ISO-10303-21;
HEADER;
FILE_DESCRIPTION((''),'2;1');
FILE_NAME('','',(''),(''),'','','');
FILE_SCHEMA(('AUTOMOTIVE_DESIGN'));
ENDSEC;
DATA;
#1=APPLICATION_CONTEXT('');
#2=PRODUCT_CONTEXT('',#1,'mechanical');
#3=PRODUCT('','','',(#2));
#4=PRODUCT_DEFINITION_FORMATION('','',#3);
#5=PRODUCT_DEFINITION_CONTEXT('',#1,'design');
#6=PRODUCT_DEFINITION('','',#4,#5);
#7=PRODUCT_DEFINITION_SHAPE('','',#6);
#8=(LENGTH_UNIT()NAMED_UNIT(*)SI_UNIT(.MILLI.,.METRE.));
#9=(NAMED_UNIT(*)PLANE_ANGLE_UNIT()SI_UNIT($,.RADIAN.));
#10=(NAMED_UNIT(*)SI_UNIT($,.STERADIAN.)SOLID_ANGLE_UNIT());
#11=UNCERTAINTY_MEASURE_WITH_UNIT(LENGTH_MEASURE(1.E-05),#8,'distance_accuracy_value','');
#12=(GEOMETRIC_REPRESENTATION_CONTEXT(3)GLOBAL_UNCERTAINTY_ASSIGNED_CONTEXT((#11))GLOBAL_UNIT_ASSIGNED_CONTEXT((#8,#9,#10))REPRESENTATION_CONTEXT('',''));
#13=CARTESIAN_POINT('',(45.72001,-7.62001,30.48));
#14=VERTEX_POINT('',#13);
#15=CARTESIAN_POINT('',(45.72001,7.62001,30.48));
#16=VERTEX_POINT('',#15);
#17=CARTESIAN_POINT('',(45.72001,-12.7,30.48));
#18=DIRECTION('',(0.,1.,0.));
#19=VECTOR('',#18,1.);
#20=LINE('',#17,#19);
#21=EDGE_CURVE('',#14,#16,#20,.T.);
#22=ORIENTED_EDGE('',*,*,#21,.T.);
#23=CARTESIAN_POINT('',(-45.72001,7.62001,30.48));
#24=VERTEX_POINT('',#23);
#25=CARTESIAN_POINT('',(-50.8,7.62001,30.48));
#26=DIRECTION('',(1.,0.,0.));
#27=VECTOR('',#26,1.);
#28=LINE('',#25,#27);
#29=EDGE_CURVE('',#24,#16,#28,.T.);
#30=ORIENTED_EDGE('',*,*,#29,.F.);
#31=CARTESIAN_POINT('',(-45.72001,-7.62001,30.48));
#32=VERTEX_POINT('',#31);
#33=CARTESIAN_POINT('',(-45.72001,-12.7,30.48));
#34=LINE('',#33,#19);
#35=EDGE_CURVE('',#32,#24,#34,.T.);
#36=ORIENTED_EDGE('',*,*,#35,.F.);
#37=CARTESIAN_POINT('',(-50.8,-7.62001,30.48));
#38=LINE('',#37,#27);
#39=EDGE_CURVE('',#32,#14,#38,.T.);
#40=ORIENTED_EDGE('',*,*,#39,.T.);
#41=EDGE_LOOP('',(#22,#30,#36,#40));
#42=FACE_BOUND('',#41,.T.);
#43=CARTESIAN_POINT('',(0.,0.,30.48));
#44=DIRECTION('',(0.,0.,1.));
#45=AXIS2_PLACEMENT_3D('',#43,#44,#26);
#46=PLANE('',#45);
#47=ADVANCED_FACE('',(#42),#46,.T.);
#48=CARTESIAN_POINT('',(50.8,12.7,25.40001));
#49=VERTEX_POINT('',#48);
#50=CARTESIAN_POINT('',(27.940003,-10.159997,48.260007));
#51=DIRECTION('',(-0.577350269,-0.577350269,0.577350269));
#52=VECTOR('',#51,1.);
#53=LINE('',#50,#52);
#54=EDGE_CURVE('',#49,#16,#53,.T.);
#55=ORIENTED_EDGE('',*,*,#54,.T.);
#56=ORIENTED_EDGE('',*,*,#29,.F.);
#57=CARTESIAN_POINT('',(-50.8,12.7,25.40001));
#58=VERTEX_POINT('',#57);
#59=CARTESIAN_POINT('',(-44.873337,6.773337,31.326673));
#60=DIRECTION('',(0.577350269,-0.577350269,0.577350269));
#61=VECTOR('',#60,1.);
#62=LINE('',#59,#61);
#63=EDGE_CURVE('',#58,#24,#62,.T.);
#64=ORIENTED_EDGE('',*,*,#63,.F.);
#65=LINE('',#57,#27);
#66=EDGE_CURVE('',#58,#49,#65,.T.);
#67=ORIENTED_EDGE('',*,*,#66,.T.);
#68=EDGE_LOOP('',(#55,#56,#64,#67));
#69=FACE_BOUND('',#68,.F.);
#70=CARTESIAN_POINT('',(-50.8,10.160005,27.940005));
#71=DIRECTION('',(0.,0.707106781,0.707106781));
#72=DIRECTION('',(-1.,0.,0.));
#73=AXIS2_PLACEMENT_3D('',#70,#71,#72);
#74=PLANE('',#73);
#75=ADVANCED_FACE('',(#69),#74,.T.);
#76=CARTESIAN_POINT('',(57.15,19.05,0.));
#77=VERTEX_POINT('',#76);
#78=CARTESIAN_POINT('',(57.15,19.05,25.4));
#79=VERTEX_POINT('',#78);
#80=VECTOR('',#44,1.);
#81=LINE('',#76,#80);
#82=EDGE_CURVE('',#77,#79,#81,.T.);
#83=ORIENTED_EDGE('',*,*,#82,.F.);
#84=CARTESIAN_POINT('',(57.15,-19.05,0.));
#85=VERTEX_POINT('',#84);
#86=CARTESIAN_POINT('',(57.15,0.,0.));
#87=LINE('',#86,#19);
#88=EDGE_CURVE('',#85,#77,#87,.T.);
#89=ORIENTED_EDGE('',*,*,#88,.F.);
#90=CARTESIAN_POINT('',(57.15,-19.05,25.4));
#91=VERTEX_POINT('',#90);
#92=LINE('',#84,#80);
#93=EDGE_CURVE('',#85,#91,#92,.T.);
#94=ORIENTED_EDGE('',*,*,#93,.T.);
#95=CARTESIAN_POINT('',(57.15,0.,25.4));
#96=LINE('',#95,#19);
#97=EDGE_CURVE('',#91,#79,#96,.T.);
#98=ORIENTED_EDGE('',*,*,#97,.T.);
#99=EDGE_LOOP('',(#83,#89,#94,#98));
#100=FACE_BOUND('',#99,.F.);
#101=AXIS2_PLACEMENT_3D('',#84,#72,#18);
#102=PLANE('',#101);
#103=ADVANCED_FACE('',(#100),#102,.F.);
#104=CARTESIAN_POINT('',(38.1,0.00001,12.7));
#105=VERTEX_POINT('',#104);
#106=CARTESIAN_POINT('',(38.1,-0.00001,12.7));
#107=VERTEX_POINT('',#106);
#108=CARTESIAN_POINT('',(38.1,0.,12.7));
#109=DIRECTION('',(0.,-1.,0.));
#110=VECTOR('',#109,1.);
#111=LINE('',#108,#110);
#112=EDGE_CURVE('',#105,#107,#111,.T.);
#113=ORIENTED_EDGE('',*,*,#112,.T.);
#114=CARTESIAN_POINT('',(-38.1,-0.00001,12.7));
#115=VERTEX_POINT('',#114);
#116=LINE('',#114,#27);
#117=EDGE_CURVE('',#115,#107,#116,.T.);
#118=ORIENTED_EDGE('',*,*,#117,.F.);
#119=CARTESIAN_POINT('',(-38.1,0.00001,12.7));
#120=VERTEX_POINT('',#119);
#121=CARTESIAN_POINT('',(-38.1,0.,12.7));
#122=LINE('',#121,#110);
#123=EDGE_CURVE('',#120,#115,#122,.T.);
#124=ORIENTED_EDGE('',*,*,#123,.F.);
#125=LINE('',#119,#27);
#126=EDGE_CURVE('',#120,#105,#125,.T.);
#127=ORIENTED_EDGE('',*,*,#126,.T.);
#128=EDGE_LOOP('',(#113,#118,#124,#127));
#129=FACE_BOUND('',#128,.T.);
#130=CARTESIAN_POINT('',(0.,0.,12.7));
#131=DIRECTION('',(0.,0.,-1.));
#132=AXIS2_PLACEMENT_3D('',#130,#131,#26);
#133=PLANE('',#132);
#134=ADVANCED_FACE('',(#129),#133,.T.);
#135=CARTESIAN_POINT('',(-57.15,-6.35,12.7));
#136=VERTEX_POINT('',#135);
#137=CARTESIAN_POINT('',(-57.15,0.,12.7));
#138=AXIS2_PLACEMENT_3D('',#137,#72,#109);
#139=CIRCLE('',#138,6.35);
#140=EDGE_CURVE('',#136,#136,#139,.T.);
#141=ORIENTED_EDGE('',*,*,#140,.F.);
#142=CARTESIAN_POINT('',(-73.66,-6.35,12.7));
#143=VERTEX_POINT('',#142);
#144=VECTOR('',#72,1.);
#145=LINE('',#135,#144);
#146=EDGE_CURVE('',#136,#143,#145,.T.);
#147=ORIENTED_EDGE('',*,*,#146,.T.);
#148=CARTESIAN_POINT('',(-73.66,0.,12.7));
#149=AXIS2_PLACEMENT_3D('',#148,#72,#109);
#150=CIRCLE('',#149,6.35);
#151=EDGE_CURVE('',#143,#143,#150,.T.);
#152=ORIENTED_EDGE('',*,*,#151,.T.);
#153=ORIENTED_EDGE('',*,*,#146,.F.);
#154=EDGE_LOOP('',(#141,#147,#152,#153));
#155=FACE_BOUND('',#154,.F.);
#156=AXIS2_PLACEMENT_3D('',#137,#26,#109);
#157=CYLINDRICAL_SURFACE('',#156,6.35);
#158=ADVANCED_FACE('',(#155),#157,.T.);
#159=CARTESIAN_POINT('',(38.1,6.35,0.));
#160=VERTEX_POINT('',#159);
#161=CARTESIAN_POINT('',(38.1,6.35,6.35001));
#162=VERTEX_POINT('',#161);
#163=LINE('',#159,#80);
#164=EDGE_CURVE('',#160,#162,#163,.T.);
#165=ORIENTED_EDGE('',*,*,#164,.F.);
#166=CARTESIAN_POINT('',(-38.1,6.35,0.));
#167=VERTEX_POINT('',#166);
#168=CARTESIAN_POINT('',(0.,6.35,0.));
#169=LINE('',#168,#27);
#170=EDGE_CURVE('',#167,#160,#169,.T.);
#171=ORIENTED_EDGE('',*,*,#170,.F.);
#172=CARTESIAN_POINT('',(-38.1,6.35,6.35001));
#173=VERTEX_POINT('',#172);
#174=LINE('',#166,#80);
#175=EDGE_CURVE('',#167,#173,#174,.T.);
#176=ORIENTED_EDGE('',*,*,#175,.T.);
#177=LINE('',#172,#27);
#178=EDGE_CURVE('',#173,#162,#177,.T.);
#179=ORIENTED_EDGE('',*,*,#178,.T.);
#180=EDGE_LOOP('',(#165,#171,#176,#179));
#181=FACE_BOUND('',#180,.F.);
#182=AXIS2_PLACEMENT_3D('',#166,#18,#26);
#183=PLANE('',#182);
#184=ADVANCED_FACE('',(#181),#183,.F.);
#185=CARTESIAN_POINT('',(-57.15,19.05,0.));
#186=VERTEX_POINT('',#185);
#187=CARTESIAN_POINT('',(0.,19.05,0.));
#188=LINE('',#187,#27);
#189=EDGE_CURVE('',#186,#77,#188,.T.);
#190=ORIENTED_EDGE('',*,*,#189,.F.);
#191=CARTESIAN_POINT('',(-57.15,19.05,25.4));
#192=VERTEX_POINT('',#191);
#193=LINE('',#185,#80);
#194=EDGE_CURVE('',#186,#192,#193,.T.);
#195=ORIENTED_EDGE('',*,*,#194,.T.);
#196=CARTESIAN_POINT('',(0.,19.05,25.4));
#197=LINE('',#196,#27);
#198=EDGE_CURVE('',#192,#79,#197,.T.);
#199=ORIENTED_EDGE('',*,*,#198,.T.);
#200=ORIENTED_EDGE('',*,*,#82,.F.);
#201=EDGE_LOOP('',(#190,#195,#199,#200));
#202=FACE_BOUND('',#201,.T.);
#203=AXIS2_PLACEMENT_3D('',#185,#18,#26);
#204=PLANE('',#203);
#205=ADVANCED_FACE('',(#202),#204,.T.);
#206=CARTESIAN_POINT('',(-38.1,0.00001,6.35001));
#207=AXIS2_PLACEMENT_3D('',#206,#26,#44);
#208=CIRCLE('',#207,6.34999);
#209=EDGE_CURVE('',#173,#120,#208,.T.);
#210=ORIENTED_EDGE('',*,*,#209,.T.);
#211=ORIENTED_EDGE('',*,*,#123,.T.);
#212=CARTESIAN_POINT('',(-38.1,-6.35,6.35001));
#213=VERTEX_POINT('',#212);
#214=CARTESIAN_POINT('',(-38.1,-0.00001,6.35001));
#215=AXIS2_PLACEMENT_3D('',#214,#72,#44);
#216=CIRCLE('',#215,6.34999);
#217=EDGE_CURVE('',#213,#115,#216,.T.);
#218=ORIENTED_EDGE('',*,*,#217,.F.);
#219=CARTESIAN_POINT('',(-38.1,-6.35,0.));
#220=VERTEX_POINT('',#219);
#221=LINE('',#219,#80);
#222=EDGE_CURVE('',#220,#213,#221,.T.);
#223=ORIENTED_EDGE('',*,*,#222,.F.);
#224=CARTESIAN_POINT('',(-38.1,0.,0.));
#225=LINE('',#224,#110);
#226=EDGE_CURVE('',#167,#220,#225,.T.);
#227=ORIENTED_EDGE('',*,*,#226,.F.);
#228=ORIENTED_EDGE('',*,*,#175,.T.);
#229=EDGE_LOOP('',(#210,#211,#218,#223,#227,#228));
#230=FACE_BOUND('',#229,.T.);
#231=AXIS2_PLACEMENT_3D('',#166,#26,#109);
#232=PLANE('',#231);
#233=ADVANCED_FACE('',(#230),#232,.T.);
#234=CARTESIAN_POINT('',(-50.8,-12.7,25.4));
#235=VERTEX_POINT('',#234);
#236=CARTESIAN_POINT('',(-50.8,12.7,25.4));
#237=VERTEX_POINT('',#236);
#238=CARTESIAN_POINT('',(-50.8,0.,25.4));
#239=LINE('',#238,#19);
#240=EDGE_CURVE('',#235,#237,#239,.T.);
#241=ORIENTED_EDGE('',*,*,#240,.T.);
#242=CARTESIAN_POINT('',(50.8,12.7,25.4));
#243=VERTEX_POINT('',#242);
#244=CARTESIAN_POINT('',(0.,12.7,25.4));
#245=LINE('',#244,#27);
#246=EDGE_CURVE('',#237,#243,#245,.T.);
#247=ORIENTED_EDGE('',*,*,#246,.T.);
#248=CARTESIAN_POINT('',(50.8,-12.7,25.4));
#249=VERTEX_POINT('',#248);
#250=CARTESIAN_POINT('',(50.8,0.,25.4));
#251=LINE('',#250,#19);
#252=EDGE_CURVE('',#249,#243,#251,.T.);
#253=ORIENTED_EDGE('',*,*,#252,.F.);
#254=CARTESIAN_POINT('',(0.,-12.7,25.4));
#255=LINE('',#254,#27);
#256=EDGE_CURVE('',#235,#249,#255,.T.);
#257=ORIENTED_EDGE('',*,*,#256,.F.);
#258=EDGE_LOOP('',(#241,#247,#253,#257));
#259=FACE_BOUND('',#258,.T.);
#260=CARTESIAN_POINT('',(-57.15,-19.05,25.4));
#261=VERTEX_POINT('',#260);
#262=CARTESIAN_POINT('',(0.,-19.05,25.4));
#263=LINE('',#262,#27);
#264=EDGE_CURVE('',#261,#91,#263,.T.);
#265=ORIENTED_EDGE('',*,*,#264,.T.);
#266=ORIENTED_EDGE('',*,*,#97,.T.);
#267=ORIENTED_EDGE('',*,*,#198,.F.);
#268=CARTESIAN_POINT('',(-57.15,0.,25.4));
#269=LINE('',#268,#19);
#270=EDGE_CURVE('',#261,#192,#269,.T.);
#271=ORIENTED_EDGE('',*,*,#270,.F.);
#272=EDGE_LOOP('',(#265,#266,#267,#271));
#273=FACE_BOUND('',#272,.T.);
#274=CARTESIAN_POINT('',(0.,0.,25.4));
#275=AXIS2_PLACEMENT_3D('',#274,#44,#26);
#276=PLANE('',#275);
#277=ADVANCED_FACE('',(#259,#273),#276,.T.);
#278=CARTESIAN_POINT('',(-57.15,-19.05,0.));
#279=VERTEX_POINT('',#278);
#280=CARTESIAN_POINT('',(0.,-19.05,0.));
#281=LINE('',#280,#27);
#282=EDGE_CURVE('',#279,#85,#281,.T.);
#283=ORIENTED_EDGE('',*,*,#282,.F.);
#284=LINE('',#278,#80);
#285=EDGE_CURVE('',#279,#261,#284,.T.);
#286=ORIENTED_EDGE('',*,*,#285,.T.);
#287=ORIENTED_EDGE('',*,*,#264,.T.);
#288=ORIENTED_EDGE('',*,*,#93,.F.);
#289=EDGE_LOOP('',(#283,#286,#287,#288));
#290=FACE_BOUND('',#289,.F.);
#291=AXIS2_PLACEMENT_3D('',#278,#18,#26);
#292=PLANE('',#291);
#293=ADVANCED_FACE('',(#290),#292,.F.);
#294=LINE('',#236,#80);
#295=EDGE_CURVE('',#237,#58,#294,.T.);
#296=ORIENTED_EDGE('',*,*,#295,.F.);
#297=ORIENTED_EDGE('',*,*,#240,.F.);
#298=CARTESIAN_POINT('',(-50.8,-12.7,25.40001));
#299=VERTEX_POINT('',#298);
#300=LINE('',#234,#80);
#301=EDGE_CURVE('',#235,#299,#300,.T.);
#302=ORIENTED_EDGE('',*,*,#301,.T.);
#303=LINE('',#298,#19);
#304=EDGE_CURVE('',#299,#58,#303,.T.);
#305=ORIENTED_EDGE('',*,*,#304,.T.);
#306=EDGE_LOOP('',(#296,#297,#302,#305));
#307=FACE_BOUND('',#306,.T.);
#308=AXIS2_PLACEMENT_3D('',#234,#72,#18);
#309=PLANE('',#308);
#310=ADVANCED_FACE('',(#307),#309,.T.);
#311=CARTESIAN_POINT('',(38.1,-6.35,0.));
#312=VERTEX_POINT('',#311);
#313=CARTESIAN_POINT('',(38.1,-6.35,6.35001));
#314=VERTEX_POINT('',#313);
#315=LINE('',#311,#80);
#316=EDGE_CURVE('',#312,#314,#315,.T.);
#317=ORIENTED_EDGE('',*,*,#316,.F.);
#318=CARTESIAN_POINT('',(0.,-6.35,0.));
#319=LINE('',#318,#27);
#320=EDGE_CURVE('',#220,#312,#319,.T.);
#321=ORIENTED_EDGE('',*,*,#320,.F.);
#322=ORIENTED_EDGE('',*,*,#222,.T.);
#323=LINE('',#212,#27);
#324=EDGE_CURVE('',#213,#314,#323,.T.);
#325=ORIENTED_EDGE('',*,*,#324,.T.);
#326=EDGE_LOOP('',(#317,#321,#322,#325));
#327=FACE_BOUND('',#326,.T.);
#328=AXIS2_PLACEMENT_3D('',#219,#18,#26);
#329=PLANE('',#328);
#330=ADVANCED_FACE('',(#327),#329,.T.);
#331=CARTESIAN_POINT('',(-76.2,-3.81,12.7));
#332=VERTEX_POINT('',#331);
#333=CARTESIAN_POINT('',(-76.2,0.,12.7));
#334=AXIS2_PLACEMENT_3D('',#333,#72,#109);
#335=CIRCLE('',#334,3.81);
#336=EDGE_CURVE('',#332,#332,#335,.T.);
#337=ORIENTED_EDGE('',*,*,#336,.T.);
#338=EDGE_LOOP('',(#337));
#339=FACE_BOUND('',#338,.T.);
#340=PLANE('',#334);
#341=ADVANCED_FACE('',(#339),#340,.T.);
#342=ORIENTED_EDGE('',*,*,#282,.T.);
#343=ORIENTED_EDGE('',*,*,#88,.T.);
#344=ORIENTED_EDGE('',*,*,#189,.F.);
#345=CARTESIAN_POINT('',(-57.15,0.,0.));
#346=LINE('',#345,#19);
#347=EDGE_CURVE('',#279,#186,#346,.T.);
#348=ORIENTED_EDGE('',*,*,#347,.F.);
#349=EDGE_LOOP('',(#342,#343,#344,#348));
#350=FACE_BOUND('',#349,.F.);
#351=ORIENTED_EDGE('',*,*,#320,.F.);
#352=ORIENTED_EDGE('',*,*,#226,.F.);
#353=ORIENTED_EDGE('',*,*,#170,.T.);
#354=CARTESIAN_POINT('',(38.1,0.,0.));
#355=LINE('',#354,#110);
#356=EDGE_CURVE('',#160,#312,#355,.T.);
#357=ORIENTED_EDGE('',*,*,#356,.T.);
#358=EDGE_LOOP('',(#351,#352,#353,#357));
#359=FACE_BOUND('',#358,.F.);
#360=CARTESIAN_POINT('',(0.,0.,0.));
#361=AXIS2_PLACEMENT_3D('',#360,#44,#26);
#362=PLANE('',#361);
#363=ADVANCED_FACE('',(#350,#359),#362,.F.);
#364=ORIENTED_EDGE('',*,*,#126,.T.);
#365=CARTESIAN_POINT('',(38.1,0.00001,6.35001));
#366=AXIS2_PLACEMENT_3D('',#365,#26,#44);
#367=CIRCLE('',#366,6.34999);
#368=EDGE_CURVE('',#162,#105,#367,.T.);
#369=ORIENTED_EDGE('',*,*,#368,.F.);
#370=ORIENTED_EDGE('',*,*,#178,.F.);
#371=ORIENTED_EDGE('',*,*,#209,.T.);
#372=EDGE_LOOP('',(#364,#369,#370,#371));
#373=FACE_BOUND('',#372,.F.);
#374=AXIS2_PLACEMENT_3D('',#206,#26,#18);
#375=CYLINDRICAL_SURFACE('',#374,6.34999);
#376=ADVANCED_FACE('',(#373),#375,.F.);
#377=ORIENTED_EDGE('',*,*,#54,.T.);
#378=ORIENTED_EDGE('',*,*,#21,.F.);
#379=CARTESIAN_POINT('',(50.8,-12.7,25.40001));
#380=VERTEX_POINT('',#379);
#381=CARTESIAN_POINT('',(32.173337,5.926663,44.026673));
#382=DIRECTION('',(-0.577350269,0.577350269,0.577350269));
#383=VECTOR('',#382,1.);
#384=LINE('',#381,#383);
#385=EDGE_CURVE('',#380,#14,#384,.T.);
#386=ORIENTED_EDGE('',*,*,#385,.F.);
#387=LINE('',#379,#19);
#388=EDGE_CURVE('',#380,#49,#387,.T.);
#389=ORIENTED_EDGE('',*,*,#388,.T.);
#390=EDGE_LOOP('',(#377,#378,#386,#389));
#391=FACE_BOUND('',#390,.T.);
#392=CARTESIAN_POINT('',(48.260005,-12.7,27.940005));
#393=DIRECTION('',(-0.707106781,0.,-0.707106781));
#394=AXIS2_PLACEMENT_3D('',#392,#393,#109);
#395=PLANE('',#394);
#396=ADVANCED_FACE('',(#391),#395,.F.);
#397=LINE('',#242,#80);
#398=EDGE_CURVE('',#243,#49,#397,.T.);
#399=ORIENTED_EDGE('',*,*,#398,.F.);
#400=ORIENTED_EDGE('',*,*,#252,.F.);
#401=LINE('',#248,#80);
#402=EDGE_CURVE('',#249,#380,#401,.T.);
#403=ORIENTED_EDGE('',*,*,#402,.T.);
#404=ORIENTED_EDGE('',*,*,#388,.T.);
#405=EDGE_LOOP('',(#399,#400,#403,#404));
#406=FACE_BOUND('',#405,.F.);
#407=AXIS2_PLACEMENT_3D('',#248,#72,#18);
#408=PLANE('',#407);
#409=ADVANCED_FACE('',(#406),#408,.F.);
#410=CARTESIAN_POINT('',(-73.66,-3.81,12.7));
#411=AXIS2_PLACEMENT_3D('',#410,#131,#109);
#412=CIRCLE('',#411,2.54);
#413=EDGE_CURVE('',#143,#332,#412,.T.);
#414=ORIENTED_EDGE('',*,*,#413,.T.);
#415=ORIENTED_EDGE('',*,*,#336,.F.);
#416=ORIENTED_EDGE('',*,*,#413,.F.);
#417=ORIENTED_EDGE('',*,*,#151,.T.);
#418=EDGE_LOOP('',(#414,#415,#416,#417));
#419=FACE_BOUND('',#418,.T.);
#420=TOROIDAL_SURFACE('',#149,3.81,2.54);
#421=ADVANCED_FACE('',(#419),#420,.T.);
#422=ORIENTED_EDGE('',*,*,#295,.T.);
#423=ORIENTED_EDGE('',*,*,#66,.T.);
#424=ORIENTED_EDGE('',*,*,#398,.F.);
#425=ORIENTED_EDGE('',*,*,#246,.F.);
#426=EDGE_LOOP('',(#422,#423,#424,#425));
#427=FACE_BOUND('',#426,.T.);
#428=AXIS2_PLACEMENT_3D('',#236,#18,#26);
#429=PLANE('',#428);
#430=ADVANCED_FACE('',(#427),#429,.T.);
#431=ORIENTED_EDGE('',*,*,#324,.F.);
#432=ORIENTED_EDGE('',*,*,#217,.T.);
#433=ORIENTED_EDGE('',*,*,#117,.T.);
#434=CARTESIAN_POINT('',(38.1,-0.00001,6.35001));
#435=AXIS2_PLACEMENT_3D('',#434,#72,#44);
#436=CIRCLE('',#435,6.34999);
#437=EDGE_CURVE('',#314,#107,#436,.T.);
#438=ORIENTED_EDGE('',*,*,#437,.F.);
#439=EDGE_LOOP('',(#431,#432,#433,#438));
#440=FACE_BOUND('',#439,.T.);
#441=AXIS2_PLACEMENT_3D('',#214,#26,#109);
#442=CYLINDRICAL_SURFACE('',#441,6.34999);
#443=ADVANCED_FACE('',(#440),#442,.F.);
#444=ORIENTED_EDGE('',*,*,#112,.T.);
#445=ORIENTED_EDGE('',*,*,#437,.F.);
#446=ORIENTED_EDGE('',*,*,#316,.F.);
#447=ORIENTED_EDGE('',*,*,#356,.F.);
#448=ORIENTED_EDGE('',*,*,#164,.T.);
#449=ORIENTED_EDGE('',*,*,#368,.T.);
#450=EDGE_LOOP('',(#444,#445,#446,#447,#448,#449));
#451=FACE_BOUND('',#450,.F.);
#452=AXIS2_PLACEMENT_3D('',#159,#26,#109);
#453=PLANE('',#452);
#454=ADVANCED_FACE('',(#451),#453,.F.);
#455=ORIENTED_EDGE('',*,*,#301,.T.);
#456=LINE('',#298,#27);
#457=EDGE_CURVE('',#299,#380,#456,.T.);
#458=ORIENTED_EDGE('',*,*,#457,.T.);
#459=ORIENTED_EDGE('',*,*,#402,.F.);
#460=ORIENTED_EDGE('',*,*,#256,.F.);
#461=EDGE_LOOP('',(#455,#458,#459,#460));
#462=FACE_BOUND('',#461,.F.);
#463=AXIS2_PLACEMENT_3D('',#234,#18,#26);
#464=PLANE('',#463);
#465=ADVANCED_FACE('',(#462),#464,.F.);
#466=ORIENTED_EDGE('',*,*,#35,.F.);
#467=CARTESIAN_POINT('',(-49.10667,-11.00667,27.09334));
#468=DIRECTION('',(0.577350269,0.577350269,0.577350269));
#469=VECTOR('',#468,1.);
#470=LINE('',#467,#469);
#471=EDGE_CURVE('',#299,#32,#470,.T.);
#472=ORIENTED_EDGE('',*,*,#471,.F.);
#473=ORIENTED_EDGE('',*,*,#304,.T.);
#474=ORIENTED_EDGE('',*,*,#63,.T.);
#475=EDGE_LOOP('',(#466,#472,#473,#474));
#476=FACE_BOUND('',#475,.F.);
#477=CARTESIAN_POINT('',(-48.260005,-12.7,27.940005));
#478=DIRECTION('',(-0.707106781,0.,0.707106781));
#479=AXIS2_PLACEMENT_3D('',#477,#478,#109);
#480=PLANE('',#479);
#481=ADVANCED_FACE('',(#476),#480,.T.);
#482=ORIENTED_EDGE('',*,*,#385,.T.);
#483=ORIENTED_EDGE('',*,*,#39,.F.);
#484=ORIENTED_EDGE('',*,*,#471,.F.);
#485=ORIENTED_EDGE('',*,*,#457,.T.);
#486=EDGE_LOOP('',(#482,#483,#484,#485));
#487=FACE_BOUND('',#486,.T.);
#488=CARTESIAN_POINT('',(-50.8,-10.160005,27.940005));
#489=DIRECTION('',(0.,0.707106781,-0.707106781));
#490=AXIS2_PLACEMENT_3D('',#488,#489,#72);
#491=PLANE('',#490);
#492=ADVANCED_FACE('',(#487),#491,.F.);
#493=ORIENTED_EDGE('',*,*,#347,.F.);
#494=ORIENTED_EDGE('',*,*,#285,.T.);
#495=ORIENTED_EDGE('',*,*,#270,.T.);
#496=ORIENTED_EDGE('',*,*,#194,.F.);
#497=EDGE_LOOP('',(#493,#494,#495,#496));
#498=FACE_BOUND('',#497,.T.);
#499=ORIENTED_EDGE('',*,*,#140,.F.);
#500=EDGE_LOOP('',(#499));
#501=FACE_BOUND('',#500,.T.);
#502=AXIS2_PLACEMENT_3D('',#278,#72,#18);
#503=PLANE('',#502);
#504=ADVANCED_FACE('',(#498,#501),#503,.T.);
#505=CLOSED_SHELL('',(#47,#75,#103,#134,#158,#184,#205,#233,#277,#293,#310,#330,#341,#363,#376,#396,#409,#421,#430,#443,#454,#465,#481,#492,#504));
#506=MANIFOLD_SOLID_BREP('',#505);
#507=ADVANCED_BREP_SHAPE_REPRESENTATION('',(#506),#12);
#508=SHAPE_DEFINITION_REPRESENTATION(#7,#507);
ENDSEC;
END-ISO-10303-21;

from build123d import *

# Parameters (mm, degrees)
F0_W     = 114.3
F0_H     = 38.1
F1_DEPTH = 25.4
F2_R     = 6.35
F3_DEPTH = 19.05
F4_R     = 2.54
F5_W     = 101.6
F5_H     = 25.4
F6_DEPTH = 5.08
F7_SIZE  = 5.07999
F8_W     = 76.2
F8_H     = 12.7
F9_DEPTH = 12.7
F10_R    = 6.34999


# Not quite as in the source:
# - a fillet or chamfer is up to 0.001 mm smaller than in the source, because OpenCascade refuses the exact size


with BuildPart() as f1:
    # F0 (on Top) → F1 (new body)
    with BuildSketch(Plane.XY):
        Rectangle(F0_W, F0_H)
    extrude(amount=F1_DEPTH)

    # F2 (on face) → F3 (join)
    with BuildSketch(Plane(origin=(-57.15, 0, 0), x_dir=(0, -1, 0), z_dir=(-1, 0, 0))):
        with Locations((0, 12.7)):
            Circle(F2_R)
    extrude(amount=F3_DEPTH)

    # F4
    f4_edges = [f1.edges().sort_by_distance(p)[0] for p in [
        (-76.2, 6.35, 12.7),
    ]]
    fillet(f4_edges, radius=F4_R)

    # F5 (on face) → F6 (join)
    with BuildSketch(Plane.XY.offset(25.4)):
        Rectangle(F5_W, F5_H)
    extrude(amount=F6_DEPTH)

    # F7 (size 5.08 in the source; OpenCascade refuses exactly that, so slightly less here)
    f7_edges = [f1.edges().sort_by_distance(p)[0] for p in [
        (0, -12.7, 30.48),
        (-50.8, 0, 30.48),
        (50.8, 0, 30.48),
        (0, 12.7, 30.48),
    ]]
    chamfer(f7_edges, length=F7_SIZE)

    # F8 (on face) → F9 (cut)
    with BuildSketch(Plane(origin=(0, 0, 0), x_dir=(1, 0, 0), z_dir=(0, 0, -1))):
        Rectangle(F8_W, F8_H)
    extrude(amount=-F9_DEPTH, mode=Mode.SUBTRACT)

    # F10 (radius 6.35 in the source; OpenCascade refuses exactly that, so slightly less here)
    f10_edges = [f1.edges().sort_by_distance(p)[0] for p in [
        (0, 6.35, 12.7),
        (0, -6.35, 12.7),
    ]]
    fillet(f10_edges, radius=F10_R)


solid = f1.part
